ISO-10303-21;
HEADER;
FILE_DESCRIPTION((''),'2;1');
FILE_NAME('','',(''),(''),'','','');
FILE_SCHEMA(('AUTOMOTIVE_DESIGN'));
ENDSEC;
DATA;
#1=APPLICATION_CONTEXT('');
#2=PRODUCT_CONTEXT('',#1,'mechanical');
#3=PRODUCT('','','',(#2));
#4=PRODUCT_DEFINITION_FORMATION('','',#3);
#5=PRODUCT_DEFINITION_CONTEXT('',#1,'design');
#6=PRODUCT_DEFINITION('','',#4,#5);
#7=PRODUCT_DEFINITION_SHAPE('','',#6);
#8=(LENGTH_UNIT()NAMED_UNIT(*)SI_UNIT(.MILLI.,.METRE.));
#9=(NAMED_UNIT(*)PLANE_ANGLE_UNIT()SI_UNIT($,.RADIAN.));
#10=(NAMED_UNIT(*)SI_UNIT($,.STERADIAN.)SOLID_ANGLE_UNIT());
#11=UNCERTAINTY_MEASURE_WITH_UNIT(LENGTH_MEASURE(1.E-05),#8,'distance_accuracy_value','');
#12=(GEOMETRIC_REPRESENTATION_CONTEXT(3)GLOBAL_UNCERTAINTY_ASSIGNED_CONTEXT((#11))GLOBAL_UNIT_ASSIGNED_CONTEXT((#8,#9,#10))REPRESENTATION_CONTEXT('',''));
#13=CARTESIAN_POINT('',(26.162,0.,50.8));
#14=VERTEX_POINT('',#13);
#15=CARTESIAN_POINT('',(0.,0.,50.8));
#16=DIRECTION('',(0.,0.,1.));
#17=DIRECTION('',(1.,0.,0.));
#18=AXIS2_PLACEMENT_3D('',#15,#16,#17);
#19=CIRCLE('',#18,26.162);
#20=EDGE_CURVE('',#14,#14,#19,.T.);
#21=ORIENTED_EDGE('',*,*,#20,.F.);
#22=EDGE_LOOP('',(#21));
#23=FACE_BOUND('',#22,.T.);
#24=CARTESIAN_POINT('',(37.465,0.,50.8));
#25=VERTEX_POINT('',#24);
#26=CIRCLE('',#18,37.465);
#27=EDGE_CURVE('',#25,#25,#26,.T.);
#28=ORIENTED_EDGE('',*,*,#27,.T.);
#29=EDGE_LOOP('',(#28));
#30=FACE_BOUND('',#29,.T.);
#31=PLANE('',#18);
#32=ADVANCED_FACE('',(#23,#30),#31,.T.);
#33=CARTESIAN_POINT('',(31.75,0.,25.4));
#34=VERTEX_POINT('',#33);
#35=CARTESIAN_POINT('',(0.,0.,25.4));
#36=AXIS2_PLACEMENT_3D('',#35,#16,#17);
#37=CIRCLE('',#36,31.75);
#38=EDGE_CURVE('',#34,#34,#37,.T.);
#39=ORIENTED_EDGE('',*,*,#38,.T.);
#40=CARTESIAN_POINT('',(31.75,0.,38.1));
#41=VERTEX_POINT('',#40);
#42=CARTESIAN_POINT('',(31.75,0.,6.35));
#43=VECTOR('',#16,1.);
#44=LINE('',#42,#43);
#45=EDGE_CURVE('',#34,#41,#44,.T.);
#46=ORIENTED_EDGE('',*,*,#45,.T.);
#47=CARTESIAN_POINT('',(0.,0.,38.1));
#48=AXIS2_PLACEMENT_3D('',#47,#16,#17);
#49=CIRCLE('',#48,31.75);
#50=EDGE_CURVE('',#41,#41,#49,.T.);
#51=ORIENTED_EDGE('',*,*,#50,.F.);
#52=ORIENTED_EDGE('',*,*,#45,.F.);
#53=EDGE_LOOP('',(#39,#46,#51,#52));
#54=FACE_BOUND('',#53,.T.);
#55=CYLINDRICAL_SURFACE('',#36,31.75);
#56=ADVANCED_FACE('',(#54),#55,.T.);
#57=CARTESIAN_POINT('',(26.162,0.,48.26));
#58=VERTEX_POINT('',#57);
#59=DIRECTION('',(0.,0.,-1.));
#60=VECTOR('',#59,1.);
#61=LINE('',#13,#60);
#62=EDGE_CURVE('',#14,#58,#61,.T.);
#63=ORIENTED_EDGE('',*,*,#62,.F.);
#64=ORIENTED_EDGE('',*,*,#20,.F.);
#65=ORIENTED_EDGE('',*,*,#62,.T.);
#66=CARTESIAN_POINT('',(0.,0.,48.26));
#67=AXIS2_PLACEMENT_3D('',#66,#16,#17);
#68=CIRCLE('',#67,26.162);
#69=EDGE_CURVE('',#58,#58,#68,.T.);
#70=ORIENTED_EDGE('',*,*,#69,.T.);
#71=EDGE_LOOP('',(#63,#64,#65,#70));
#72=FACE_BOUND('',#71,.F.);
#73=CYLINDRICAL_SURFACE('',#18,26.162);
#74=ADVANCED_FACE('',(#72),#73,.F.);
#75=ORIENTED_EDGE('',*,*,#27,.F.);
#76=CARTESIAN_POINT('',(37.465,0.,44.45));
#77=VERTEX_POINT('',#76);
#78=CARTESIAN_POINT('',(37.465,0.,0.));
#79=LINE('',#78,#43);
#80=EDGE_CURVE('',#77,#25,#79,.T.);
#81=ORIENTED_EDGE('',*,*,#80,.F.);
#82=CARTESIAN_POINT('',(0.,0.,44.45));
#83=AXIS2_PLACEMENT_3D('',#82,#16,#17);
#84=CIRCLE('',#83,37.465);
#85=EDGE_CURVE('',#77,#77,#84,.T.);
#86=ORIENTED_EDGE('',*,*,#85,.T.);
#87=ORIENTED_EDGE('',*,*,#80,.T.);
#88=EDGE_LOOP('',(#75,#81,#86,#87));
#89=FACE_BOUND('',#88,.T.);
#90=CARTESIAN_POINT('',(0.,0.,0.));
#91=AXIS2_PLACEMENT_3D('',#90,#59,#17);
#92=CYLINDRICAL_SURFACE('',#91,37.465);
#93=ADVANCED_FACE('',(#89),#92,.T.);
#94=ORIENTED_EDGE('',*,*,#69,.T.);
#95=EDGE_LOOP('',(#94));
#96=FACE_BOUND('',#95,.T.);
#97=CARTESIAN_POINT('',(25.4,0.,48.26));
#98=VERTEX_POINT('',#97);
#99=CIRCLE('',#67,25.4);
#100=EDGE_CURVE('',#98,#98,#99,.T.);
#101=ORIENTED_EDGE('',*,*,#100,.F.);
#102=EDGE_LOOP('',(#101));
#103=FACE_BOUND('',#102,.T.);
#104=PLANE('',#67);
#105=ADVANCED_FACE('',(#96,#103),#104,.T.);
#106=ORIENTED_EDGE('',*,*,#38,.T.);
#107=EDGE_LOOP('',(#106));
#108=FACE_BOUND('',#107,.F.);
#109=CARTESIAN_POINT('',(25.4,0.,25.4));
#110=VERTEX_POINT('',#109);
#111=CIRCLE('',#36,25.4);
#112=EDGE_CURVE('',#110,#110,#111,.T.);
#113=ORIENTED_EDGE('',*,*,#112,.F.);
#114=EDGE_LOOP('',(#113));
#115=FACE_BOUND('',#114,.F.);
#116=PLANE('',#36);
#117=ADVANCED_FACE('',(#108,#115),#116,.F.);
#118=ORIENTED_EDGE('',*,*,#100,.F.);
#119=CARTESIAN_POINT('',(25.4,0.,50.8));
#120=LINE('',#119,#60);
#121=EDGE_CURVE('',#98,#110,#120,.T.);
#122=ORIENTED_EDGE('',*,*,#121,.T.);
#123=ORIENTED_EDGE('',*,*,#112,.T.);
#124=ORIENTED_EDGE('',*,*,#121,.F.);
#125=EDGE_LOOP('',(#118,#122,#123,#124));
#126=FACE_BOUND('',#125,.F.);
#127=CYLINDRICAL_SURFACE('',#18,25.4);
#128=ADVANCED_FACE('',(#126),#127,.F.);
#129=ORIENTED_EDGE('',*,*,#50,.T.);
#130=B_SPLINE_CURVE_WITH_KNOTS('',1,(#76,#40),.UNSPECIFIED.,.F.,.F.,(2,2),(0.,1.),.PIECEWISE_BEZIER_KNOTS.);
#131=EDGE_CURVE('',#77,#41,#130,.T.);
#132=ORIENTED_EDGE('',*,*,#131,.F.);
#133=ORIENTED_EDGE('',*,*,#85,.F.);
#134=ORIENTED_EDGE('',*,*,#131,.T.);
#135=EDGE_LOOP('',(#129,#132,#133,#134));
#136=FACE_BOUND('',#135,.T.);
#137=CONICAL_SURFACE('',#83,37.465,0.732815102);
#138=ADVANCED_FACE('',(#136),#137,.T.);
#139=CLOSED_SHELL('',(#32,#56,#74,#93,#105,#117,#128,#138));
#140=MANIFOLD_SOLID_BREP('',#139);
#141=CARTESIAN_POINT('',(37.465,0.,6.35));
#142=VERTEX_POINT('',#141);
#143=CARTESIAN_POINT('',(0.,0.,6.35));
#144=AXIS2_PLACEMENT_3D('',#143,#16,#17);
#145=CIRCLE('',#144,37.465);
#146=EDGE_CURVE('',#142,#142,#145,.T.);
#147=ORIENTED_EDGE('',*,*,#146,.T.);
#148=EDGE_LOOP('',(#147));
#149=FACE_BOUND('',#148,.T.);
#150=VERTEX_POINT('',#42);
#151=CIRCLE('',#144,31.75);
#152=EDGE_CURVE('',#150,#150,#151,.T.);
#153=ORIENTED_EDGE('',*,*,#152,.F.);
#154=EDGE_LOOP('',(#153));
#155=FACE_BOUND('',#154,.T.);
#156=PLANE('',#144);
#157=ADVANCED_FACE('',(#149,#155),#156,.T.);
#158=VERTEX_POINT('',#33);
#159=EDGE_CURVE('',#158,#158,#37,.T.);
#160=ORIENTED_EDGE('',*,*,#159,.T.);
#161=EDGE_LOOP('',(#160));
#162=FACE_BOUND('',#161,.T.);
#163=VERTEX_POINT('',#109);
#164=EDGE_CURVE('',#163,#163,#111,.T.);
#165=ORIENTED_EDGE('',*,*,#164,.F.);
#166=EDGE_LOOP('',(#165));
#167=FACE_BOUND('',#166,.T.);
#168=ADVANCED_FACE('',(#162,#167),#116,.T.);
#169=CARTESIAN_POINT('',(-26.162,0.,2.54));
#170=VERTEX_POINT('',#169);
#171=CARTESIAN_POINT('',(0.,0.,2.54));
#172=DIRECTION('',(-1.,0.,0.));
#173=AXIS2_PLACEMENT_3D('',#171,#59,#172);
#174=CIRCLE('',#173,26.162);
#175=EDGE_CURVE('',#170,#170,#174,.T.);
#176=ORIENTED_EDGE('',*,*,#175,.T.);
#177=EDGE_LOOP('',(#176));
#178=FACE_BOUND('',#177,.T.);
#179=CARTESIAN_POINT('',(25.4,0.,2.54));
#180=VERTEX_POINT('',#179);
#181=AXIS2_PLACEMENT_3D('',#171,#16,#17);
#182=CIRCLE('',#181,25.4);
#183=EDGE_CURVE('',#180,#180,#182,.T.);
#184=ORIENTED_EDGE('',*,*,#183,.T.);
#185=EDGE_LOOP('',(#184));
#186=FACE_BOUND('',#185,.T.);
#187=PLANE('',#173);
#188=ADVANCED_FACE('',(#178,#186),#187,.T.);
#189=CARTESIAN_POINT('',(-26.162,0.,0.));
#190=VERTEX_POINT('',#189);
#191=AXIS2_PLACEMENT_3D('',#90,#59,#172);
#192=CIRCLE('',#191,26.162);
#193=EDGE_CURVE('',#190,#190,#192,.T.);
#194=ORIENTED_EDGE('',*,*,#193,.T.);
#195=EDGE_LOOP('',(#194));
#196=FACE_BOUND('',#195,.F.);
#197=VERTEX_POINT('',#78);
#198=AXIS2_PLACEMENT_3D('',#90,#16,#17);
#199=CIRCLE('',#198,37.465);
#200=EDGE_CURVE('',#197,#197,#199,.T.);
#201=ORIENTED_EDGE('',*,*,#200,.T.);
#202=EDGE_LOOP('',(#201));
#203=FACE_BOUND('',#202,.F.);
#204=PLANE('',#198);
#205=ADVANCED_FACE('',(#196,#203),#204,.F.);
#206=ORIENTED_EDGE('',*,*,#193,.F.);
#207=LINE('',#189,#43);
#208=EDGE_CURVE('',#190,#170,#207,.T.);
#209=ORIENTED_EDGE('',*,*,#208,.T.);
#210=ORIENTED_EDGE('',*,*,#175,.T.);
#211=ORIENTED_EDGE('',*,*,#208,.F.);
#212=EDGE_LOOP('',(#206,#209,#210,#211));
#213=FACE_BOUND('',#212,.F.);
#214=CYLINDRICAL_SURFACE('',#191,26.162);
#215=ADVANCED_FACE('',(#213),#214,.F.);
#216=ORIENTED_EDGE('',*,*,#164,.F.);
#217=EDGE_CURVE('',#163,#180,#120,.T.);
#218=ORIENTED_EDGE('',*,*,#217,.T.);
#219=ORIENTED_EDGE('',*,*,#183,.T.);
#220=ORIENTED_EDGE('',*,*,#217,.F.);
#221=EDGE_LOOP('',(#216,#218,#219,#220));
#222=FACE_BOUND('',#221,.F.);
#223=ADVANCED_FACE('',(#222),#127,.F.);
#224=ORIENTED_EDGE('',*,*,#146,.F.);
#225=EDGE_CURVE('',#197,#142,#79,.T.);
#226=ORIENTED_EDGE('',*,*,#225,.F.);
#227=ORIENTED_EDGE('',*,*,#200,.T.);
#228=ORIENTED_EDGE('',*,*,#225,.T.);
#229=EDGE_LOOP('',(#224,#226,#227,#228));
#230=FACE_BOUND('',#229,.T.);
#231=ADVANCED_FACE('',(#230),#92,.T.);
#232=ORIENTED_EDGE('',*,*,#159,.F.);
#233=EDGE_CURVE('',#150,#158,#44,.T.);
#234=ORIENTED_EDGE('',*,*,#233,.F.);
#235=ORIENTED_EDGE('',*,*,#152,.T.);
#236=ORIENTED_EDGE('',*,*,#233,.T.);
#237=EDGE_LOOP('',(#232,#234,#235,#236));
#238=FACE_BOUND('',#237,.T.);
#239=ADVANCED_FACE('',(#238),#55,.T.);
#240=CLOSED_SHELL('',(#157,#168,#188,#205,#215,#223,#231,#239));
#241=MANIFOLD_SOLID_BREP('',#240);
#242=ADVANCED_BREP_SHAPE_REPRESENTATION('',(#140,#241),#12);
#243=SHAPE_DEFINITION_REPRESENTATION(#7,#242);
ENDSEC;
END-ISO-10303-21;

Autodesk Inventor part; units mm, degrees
ref_plane "YZ Plane" through (0, 0, 0) normal (1, 0, 0) x (0, 1, 0)
ref_plane "XZ Plane" through (0, 0, 0) normal (0, 1, 0) x (-1, 0, 0)
sketch "Sketch1" plane through (0, 0, 0) normal (0, 0, 1) x (1, 0, 0)
  circle A0 centre (0, 0) radius 37.465
  dimension "d0" = 74.93
extrude "Extrusion1" add sketch "Sketch1" along normal blind 50.8
sketch "Sketch3" plane through (0, 0, 50.8) normal (0, 0, 1) x (1, 0, 0)
  circle A0 centre (0, 0) radius 26.162
  dimension "d6" = 52.324
extrude "Extrusion3" cut sketch "Sketch3" against normal blind 2.54
sketch "Sketch4" plane through (0, 0, 0) normal (0, 0, -1) x (-1, 0, 0)
  circle A0 centre (0, 0) radius 26.162
  dimension "d9" = 52.324
extrude "Extrusion4" cut sketch "Sketch4" against normal blind 2.54
ref_plane "Work Plane1" through (0, 0, 25.4) normal (0, 0, 1) x (1, 0, 0)
sketch "Sketch5" plane through (0, 0, 25.4) normal (0, 0, 1) x (1, 0, 0)
  circle A0 centre (0, 0) radius 31.75
  circle A1 centre (0, 0) radius 37.465
  dimension "d13" = 63.5
extrude "Extrusion5" cut sketch "Sketch5" along normal mid plane 38.1
ref_plane "Work Plane2" through (0, 0, 38.1) normal (0, 0, 1) x (1, 0, 0)
sketch "Sketch6" plane through (0, 0, 38.1) normal (0, 0, 1) x (1, 0, 0)
  circle A0 centre (0, 0) radius 31.75
  dimension "d17" = 63.5
loft "Loft1" add profiles "Sketch6" section 1 edges at (-37.465, 0, 44.45)
sketch "Sketch2" plane through (0, 0, 50.8) normal (0, 0, 1) x (1, 0, 0)
  circle A0 centre (0, 0) radius 25.4
  dimension "d3" = 50.8
extrude "Extrusion2" cut sketch "Sketch2" against normal blind 50.8
split body "Split1" result two bodies by plane through (0, 0, 25.4) normal (0, 0, 1) first body at (25.5646, -4.1547, 33.02)
properties part number "KF50tube_v1_s1"
